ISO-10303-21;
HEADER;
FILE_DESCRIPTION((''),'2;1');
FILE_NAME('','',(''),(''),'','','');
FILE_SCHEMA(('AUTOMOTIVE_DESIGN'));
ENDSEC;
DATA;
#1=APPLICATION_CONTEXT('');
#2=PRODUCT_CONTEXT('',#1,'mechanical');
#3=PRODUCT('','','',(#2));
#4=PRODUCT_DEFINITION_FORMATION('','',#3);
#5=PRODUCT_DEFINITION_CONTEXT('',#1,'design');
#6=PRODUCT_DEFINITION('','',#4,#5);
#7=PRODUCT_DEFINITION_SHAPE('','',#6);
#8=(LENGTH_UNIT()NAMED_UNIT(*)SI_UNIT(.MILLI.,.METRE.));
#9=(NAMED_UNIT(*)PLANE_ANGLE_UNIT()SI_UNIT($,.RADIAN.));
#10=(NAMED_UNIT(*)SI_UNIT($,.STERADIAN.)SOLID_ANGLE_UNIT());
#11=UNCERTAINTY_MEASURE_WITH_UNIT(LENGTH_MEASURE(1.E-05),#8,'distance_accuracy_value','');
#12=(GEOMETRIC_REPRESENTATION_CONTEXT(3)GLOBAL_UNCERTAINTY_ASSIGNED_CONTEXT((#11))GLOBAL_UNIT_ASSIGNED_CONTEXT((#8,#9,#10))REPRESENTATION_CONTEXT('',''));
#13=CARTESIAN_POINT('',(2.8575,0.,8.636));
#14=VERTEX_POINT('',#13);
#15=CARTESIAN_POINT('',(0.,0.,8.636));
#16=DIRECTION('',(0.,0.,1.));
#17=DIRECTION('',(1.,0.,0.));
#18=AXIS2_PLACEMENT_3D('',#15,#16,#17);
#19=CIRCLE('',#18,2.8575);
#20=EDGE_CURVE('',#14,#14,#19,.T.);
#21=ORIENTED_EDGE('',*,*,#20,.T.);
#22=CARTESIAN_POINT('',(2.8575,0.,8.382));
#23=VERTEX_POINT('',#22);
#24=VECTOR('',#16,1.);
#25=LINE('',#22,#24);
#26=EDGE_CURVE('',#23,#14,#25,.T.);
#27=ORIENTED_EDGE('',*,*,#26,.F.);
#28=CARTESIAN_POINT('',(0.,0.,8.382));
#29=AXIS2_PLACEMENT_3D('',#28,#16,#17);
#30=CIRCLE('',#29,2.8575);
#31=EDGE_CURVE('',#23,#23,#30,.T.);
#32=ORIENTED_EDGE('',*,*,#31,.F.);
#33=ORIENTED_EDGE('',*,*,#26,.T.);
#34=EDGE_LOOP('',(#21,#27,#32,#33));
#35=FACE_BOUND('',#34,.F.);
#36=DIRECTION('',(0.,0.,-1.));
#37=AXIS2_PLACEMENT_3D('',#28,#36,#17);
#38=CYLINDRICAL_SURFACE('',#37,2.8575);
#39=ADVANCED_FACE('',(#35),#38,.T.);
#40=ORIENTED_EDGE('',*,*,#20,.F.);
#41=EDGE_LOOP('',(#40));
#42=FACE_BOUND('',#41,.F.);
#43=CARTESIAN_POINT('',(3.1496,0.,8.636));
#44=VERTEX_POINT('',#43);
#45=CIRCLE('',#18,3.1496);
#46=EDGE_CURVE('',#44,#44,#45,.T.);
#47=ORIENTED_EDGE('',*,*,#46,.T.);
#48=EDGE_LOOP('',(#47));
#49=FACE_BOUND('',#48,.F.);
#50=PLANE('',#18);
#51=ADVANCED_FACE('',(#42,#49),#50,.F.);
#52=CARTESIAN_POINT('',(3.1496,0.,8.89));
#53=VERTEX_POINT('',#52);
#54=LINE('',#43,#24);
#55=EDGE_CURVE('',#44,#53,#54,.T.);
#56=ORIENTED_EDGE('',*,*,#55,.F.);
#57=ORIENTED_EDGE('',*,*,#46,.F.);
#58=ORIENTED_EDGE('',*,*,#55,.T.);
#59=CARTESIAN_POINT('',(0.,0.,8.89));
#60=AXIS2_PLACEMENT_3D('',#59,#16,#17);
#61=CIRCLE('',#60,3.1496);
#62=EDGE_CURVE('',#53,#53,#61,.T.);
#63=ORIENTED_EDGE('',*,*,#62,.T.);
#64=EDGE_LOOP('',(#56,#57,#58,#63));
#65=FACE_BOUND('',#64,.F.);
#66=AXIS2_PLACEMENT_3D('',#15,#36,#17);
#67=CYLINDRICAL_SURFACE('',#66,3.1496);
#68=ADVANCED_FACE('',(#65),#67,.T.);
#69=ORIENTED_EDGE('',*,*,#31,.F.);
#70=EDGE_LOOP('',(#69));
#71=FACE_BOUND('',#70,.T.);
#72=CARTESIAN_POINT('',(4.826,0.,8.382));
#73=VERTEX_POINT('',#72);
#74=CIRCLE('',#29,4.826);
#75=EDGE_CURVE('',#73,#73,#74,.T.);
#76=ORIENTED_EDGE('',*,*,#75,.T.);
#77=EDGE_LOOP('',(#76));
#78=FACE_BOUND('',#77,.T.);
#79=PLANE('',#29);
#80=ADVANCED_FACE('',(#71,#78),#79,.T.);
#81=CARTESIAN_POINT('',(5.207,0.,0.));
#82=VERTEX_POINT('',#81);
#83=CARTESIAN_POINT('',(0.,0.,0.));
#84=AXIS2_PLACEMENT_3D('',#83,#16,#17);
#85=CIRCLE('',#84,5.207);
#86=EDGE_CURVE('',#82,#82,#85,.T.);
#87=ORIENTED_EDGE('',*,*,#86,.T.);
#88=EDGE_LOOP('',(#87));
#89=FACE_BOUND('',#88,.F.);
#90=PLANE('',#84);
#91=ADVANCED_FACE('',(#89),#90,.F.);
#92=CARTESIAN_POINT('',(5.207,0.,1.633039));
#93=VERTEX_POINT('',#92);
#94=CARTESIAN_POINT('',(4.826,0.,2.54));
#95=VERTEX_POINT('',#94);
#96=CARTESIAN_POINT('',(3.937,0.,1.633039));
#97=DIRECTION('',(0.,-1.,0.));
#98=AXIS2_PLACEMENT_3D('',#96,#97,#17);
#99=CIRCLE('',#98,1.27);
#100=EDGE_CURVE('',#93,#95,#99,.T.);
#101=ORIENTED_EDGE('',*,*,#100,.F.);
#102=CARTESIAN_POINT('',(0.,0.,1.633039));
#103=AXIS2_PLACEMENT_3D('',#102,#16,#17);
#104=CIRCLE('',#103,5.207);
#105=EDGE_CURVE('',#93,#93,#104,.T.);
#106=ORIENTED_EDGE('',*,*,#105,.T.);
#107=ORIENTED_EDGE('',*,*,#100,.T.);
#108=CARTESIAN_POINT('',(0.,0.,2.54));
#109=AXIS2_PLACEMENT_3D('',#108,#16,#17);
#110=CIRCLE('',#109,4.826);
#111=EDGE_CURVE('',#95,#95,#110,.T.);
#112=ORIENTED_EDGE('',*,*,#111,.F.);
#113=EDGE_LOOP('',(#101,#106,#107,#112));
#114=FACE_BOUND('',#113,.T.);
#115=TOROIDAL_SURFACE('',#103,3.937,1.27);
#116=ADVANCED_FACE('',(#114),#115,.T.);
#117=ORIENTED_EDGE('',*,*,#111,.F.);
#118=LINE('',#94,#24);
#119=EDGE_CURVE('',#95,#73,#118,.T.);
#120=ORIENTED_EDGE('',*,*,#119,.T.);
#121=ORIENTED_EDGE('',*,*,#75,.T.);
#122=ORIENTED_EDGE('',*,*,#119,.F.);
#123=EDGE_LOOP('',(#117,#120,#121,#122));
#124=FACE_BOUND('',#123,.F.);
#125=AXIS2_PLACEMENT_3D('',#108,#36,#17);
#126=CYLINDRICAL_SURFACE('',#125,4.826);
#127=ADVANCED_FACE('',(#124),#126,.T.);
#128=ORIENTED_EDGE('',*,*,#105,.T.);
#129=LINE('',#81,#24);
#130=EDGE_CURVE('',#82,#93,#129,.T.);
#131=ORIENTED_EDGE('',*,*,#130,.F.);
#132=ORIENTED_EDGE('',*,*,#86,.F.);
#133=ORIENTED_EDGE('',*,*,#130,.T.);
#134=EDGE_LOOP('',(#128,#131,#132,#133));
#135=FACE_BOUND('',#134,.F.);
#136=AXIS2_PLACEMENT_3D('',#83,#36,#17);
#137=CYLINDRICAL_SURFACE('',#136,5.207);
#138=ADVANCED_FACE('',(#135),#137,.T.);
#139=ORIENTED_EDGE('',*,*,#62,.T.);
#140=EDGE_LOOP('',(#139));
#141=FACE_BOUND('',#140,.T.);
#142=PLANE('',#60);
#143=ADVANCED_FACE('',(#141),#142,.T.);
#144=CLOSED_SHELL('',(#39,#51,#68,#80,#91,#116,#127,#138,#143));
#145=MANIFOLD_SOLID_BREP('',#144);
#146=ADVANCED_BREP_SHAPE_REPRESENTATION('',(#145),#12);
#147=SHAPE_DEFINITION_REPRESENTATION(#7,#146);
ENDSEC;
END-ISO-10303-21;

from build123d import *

# Parameters (mm, degrees)
F0_R     = 5.207
F1_DEPTH = 2.54
F2_R     = 4.826
F3_DEPTH = 5.842
F5_R     = 2.8575
F6_DEPTH = 0.254
F7_R     = 3.1496
F8_DEPTH = 0.254


# Not quite as in the source:
# - a fillet or chamfer that OpenCascade refuses, or shapes differently, is made with other operations: its cross-section is extruded or revolved along the edge and cut away or added


with BuildPart() as f1:
    # F0 (on Top) → F1 (new body)
    with BuildSketch(Plane.XY):
        Circle(F0_R)
    extrude(amount=F1_DEPTH)

    # F2 (on face) → F3 (join)
    with BuildSketch(Plane.XY.offset(2.54)):
        Circle(F2_R)
    extrude(amount=F3_DEPTH)

    # F4: fillet of radius 1.27 on 1 edges, made by hand

    # F4_s1 → F4_t2 (revolve, cut)
    with BuildSketch(Plane.XZ):
        with BuildLine():
            ThreePointArc((5.207, 1.6330385896), (5.1078821461, 2.1249074745), (4.826, 2.54))
            Line((4.826, 2.54), (5.207, 2.54))
            Line((5.207, 2.54), (5.207, 1.6330385896))
        make_face()
    revolve(axis=Axis((0, 0, 2.54), (0, 0, 1)), mode=Mode.SUBTRACT)

    # F5 (on face) → F6 (join)
    with BuildSketch(Plane.XY.offset(8.382)):
        Circle(F5_R)
    extrude(amount=F6_DEPTH)

    # F7 (on face) → F8 (join)
    with BuildSketch(Plane.XY.offset(8.636)):
        Circle(F7_R)
    extrude(amount=F8_DEPTH)


solid = f1.part
